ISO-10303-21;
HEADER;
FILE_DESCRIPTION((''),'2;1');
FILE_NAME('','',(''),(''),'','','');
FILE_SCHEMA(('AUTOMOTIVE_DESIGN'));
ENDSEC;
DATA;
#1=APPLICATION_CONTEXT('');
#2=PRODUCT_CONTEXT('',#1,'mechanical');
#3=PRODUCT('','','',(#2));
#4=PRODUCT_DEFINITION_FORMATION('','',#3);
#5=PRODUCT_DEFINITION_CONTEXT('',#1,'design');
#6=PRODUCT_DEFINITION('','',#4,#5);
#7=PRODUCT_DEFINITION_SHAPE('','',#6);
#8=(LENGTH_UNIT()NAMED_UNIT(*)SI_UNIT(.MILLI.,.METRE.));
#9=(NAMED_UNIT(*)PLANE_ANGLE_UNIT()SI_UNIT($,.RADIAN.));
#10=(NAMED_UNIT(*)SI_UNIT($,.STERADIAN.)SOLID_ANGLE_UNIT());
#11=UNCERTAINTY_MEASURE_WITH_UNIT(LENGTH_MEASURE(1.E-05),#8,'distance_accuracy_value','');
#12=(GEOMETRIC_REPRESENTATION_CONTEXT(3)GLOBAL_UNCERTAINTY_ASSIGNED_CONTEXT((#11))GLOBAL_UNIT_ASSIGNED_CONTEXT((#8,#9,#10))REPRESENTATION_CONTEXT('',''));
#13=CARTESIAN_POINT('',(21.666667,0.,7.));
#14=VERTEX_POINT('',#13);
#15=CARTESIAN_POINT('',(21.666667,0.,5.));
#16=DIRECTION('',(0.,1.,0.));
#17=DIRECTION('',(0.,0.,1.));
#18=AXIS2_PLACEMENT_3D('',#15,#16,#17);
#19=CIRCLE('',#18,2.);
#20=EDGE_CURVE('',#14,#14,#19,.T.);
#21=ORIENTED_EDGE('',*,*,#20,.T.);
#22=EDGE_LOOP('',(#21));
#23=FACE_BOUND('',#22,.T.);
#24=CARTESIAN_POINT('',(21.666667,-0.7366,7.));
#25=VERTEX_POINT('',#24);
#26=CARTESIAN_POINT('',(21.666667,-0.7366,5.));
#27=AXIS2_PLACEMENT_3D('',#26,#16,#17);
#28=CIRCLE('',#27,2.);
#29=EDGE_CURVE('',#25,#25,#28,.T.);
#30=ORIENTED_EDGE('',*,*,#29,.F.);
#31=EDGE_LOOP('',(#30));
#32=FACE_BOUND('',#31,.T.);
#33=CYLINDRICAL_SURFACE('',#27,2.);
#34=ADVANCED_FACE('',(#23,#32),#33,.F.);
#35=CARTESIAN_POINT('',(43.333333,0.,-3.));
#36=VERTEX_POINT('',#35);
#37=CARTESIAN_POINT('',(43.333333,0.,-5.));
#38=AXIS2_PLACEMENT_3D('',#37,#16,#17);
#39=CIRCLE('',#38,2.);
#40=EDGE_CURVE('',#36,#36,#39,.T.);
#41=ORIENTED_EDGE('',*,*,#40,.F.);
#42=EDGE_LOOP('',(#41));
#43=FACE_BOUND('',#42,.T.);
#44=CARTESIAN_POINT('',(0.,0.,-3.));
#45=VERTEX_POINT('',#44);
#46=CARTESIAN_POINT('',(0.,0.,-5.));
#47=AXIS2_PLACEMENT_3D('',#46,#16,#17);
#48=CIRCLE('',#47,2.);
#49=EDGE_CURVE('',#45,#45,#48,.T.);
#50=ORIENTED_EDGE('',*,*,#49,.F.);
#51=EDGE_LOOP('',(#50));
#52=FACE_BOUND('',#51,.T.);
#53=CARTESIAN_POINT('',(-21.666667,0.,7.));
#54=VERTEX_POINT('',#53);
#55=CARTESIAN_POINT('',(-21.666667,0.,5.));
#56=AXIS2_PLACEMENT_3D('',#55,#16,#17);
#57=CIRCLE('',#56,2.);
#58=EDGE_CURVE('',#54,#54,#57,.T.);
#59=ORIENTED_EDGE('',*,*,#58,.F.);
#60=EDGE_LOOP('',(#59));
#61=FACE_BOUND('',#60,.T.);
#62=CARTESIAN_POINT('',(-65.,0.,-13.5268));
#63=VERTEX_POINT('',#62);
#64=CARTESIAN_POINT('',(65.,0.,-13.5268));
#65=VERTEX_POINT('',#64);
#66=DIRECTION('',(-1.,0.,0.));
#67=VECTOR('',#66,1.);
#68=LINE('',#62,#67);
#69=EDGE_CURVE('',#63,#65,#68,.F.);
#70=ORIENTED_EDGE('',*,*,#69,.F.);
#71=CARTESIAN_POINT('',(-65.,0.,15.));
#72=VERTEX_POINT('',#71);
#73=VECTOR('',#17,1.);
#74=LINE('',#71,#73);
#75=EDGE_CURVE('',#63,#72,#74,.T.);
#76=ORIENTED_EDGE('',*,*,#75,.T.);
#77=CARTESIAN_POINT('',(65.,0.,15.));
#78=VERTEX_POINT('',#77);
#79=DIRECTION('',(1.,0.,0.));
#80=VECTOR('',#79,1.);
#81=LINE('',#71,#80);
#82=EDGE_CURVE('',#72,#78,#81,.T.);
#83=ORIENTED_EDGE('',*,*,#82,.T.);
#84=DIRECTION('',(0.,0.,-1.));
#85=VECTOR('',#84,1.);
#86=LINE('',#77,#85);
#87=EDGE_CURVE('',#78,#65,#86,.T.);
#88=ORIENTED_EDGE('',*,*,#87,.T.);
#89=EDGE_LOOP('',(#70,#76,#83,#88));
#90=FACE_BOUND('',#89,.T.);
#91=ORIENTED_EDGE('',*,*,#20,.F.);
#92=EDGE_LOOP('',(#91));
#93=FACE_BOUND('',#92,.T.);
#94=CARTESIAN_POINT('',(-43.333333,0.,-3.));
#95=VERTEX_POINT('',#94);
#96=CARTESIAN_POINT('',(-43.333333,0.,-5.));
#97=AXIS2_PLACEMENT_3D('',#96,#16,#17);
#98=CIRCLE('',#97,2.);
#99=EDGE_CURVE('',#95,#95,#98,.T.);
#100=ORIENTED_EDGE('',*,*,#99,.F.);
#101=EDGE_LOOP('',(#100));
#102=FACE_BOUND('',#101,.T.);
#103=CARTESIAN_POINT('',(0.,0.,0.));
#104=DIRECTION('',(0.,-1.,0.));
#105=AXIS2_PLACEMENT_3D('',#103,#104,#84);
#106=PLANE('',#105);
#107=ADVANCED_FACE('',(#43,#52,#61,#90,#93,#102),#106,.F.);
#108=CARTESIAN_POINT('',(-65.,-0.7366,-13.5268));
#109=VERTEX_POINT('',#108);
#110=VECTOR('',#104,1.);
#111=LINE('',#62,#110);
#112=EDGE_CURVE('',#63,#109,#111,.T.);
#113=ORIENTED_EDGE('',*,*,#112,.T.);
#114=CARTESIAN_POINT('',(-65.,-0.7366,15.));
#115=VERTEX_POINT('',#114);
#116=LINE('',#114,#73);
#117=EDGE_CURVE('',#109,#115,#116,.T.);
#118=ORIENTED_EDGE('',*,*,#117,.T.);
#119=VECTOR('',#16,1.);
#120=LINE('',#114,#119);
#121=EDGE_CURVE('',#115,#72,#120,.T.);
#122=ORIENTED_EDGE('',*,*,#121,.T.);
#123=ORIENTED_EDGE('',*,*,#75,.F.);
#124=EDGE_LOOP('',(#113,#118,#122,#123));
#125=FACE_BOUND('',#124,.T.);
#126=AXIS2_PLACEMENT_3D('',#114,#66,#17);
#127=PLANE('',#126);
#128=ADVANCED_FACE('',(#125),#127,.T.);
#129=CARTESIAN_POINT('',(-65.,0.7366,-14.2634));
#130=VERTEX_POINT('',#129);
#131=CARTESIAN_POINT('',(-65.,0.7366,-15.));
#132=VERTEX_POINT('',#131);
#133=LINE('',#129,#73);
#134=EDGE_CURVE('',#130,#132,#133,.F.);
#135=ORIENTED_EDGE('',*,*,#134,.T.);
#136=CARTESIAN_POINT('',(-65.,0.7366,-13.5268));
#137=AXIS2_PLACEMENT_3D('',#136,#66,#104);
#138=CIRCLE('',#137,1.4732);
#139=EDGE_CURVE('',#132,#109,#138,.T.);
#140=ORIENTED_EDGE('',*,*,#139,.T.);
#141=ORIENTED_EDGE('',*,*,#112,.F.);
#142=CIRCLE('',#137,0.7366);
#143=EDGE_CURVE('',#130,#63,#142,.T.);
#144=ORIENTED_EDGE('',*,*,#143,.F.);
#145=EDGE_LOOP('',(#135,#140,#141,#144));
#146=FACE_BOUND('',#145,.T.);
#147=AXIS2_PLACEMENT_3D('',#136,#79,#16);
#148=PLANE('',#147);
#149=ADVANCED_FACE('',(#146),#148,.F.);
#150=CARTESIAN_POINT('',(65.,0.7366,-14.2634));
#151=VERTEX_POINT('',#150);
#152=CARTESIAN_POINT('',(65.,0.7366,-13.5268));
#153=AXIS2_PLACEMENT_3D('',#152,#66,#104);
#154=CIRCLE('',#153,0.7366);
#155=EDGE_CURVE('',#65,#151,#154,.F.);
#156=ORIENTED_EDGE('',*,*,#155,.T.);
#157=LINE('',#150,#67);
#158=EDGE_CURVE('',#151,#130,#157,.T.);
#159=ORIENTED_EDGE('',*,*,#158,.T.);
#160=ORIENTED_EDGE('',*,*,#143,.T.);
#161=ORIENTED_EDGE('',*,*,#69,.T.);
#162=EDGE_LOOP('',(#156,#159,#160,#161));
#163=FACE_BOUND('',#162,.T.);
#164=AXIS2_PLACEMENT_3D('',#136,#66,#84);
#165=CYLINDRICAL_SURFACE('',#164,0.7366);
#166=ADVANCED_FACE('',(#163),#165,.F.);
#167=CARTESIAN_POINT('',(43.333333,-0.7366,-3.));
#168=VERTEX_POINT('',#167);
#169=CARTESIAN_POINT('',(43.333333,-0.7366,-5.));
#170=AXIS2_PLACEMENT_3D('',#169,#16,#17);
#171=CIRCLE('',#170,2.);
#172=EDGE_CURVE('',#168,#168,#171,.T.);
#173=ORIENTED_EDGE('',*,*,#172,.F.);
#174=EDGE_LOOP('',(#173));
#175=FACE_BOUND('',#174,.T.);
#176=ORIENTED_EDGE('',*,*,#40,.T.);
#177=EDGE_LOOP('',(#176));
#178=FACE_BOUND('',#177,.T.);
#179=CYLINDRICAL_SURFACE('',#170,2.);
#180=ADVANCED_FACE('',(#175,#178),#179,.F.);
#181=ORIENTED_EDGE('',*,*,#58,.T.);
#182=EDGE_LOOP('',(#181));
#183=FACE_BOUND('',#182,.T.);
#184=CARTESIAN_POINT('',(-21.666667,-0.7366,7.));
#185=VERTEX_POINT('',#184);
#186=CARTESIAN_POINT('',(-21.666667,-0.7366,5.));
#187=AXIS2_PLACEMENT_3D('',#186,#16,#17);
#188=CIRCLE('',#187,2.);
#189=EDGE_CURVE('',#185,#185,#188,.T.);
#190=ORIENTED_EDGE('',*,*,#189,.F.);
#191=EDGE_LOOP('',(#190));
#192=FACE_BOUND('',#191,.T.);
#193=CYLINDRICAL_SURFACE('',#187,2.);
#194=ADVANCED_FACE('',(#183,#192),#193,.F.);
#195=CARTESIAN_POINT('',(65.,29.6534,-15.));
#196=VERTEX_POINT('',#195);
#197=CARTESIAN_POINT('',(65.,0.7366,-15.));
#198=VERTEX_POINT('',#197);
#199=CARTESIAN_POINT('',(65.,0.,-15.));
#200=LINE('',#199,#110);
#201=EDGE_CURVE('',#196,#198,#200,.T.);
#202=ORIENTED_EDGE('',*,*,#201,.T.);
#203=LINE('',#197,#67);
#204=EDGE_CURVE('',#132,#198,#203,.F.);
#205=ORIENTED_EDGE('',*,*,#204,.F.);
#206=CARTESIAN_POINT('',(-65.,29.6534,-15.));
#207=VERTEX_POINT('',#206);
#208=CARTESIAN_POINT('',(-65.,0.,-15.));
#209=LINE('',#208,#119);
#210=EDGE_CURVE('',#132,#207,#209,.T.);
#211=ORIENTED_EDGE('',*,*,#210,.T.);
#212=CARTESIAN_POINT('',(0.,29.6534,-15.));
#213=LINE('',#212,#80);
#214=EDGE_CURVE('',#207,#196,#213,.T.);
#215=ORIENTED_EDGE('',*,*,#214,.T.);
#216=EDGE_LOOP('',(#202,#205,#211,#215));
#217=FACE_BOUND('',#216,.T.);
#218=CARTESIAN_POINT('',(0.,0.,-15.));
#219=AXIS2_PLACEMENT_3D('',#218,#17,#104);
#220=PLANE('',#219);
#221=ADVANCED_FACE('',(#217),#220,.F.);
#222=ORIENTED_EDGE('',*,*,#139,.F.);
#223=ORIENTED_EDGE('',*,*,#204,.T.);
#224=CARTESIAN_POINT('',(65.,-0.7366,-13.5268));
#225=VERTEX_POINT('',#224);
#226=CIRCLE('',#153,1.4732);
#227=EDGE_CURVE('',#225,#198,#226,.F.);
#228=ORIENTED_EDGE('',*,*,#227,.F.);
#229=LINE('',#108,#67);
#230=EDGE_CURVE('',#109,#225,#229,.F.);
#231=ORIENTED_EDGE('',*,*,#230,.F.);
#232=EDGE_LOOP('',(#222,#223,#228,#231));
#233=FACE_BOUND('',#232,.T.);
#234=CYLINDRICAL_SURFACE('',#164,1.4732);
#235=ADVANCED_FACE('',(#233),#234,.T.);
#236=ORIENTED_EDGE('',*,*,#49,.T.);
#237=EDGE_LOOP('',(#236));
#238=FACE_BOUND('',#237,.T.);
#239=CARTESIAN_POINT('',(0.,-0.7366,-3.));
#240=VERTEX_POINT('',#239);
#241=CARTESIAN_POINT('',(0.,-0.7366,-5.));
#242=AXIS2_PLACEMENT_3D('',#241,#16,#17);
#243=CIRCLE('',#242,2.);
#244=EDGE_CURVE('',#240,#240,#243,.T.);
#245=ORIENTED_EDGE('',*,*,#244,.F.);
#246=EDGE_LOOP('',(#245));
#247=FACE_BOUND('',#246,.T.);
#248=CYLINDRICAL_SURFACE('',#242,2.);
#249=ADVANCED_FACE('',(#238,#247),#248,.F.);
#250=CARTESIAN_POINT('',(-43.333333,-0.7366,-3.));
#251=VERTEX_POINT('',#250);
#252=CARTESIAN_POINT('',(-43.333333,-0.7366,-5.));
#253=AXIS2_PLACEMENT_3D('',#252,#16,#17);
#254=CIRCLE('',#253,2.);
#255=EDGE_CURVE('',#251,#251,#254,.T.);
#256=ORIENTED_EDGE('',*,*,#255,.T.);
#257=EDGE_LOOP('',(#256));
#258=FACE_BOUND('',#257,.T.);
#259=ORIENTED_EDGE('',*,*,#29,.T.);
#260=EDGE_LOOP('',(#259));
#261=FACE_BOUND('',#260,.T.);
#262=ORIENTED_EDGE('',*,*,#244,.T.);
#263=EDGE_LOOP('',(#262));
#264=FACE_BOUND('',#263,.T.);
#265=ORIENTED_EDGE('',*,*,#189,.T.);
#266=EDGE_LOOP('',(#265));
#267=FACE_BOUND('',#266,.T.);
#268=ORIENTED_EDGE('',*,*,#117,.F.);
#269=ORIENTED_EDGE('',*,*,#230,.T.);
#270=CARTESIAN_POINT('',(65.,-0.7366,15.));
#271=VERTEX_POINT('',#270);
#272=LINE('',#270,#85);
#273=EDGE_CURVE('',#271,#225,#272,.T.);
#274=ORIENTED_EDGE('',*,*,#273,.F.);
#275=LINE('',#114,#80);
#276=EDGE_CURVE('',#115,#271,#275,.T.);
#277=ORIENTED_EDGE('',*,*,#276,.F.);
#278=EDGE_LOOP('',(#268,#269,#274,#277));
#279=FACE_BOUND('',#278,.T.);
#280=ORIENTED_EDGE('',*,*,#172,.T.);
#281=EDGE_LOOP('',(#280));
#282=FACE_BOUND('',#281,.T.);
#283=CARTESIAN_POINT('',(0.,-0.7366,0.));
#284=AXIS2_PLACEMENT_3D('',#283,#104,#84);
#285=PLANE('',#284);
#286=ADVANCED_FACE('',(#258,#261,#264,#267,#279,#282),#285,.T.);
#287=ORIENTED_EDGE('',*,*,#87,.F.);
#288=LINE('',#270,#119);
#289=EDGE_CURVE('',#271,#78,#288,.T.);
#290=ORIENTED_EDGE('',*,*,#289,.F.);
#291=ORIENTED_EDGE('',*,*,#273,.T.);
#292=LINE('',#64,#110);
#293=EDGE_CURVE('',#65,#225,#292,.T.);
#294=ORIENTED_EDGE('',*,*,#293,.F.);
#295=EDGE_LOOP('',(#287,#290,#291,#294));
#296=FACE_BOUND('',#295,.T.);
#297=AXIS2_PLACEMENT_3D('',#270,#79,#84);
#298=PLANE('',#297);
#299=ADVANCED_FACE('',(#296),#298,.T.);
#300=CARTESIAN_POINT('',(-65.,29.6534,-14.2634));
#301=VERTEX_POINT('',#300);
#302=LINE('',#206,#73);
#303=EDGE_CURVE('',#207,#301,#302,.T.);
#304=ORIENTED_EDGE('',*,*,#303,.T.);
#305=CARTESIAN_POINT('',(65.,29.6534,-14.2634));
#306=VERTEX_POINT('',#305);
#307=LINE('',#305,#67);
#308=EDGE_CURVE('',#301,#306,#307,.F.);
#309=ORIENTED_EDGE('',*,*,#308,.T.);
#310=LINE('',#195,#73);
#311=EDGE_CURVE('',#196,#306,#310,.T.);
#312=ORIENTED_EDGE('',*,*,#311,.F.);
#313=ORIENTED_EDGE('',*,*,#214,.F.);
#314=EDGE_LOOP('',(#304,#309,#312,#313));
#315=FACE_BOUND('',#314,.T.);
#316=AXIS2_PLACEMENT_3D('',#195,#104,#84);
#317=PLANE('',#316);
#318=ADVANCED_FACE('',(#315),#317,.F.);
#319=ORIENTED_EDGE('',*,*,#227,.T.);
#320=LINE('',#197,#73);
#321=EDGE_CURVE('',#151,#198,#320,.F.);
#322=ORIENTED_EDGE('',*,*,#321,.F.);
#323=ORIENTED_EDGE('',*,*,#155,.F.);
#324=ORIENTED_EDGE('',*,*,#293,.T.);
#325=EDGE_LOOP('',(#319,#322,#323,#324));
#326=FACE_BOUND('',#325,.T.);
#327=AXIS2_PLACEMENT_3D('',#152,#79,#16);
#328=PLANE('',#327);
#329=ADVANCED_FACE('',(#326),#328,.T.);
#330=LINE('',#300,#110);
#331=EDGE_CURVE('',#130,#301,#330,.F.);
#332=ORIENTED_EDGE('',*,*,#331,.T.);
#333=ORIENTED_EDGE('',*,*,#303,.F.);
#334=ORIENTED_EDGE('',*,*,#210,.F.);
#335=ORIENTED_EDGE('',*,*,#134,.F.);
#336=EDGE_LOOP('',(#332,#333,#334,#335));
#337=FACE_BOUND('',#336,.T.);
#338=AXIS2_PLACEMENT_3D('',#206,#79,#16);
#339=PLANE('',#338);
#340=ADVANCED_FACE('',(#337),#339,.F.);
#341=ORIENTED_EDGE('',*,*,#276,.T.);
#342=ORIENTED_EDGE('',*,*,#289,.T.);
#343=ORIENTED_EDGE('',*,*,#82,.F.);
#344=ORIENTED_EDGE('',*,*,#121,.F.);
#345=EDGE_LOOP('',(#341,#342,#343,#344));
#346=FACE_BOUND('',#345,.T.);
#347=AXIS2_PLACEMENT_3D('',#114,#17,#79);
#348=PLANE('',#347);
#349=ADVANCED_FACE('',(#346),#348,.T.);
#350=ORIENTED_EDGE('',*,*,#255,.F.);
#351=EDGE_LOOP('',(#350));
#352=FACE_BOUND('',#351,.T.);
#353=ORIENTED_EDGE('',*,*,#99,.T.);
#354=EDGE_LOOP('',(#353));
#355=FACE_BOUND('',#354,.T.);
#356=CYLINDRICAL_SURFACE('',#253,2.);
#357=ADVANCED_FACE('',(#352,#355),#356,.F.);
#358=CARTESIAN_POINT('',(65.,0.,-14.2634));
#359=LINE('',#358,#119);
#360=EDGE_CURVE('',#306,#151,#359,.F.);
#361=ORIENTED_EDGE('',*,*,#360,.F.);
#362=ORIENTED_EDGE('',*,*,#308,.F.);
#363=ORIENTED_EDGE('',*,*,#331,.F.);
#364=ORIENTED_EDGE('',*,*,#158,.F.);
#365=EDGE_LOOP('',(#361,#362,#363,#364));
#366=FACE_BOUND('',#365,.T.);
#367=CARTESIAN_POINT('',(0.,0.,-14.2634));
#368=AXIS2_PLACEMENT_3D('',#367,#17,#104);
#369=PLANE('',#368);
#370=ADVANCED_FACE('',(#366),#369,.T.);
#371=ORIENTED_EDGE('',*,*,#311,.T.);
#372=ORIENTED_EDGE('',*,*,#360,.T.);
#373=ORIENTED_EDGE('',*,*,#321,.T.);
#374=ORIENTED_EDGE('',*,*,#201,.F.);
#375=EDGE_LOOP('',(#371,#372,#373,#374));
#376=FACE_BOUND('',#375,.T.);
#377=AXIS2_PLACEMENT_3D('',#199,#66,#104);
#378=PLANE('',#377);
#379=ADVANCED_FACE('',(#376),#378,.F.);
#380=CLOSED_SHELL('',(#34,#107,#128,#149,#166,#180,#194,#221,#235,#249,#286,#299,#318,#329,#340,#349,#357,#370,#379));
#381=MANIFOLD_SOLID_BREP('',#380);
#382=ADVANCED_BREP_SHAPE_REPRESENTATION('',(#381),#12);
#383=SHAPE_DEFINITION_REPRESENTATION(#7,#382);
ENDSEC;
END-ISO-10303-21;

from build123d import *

# Parameters (mm, degrees)
SKETCH1_W                    = 130
SKETCH1_H                    = 30
SKETCH1_R                    = 2
BASE_FLANGE1_DEPTH           = 0.7366
EDGE_FLANGE1_STRIP_W         = 4.4196
EDGE_FLANGE1_STRIP_H         = 0.7366
EDGE_FLANGE1_STRIP_CUT_DEPTH = 130
EDGE_FLANGE1_DEPTH           = 130


# Sheet-metal steps are written as plain solids
with BuildPart() as part:
    # Sketch1 → Base-Flange1 (new body)
    with BuildSketch(Plane(origin=(0, 0, 0), x_dir=(1, 0, 0), z_dir=(0, 1, 0))):
        Rectangle(SKETCH1_W, SKETCH1_H)
        with Locations(Location((0, 5, 0), (0, 0, 270))):
            Circle(SKETCH1_R, mode=Mode.SUBTRACT)
        with Locations(Location((-21.666666667, -5, 0), (0, 0, 270))):
            Circle(SKETCH1_R, mode=Mode.SUBTRACT)
        with Locations(Location((-43.333333333, 5, 0), (0, 0, 270))):
            Circle(SKETCH1_R, mode=Mode.SUBTRACT)
        with Locations(Location((21.666666667, -5, 0), (0, 0, 270))):
            Circle(SKETCH1_R, mode=Mode.SUBTRACT)
        with Locations(Location((43.333333333, 5, 0), (0, 0, 270))):
            Circle(SKETCH1_R, mode=Mode.SUBTRACT)
    extrude(amount=-BASE_FLANGE1_DEPTH)

    # Edge-Flange1 strip (across the edge) → Edge-Flange1 strip cut (cut)
    with BuildSketch(Plane(origin=(65, 0, -15), x_dir=(0, 0, 1), z_dir=(-1, 0, 0))):
        with Locations((-0.7366, -0.3683)):
            Rectangle(EDGE_FLANGE1_STRIP_W, EDGE_FLANGE1_STRIP_H)
    extrude(amount=EDGE_FLANGE1_STRIP_CUT_DEPTH, mode=Mode.SUBTRACT)

    # Edge-Flange1 section (across the edge) → Edge-Flange1 (add)
    with BuildSketch(Plane(origin=(65, 0, -15), x_dir=(0, 0, 1), z_dir=(-1, 0, 0))):
        with BuildLine():
            Line((0, 0.7366), (0, 29.6534))
            Line((0, 29.6534), (0.7366, 29.6534))
            Line((0.7366, 29.6534), (0.7366, 0.7366))
            ThreePointArc((0.7366, 0.7366), (0.952345145, 0.215745145), (1.4732, 0))
            Line((1.4732, 0), (1.4732, -0.7366))
            ThreePointArc((1.4732, -0.7366), (0.43149029, -0.30510971), (0, 0.7366))
        make_face()
    extrude(amount=EDGE_FLANGE1_DEPTH)


solid = part.part
